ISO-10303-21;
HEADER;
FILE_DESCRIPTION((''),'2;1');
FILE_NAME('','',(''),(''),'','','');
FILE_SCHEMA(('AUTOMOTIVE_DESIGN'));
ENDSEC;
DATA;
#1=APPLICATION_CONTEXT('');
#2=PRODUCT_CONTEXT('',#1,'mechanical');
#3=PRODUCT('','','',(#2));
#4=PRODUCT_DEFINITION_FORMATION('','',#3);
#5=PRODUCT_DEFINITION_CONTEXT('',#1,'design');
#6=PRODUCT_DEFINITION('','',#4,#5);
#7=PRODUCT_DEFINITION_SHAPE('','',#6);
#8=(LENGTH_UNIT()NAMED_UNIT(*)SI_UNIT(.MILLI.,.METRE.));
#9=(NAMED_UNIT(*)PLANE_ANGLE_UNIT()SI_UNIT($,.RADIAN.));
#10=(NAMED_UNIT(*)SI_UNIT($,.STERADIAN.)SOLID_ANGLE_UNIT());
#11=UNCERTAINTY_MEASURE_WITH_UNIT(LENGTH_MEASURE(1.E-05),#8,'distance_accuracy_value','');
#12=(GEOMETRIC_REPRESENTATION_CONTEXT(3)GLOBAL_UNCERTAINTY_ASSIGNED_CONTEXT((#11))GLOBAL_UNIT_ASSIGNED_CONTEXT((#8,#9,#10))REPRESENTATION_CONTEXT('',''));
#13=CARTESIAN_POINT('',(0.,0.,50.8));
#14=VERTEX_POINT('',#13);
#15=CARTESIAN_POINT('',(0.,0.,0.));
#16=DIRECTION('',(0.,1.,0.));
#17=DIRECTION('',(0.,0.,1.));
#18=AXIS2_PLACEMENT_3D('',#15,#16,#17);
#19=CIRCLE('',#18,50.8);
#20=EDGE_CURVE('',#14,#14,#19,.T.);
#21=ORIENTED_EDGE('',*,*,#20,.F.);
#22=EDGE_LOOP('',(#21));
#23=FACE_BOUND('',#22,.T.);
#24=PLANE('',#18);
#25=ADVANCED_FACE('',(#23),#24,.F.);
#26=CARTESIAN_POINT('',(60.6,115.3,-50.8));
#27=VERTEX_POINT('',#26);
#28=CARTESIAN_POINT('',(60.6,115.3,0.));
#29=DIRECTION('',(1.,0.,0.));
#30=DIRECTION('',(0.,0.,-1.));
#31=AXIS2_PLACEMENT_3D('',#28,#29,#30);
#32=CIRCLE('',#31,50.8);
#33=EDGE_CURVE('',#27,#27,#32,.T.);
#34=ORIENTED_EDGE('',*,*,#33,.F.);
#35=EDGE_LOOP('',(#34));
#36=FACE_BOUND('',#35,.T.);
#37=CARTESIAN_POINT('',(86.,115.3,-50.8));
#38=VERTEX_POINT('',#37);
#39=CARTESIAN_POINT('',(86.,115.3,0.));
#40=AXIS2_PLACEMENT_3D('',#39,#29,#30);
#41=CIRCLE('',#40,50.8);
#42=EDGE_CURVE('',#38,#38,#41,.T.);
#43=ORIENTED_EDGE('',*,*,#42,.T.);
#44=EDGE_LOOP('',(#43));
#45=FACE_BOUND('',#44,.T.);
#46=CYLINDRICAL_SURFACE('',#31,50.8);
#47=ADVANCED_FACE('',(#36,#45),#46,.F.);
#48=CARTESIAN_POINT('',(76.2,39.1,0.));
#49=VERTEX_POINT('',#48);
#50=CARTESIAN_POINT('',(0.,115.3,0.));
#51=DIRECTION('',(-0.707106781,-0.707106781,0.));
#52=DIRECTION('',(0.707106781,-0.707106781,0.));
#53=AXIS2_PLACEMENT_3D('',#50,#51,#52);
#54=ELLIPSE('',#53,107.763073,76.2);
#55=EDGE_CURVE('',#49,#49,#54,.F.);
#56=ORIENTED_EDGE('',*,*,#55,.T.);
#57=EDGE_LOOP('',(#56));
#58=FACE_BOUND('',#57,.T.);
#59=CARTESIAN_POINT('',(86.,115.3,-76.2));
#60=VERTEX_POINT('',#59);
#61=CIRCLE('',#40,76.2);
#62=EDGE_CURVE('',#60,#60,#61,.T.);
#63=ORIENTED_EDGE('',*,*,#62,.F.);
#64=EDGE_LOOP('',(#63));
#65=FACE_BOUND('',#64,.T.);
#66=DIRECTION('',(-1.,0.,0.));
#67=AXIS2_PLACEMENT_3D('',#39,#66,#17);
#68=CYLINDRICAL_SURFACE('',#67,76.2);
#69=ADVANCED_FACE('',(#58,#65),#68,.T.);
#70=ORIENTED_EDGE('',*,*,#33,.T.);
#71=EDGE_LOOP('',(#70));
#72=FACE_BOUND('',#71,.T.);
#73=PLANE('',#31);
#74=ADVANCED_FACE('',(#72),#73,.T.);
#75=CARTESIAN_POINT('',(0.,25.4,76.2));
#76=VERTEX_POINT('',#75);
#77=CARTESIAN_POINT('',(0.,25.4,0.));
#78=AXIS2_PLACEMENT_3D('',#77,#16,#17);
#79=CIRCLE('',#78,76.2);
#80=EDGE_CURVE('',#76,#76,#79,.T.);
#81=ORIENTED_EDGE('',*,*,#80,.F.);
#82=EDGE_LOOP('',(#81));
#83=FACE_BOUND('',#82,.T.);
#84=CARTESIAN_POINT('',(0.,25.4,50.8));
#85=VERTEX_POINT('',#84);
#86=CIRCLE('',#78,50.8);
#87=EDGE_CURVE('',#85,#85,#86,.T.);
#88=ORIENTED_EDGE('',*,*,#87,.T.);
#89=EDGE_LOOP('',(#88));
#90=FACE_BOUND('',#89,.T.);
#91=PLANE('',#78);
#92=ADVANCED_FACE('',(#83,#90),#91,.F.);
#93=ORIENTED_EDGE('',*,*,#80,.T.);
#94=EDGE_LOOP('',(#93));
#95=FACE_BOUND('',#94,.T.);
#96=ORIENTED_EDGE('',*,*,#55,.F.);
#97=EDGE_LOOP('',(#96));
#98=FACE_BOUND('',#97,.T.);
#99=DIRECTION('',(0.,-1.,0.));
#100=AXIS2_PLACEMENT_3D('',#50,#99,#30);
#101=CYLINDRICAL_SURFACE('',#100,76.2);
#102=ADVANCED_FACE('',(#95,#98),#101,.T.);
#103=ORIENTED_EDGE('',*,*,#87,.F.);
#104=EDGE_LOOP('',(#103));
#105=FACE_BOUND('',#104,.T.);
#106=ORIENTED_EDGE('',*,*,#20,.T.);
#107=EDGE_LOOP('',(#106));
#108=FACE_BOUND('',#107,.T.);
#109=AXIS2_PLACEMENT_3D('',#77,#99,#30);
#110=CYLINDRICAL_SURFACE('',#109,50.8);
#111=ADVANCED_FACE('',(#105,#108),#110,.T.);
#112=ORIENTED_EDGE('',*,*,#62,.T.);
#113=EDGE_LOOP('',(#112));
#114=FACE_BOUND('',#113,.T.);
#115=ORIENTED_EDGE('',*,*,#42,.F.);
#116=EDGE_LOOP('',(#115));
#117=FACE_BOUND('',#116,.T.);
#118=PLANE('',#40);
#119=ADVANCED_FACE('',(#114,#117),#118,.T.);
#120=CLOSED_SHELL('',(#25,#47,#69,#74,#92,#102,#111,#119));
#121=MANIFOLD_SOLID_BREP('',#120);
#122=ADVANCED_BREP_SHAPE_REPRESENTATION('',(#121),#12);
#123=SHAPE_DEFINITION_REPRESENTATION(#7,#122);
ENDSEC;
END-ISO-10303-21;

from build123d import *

# Parameters (mm, degrees)
SKETCH1_R           = 50.8
BOSS_EXTRUDE1_DEPTH = 25.4
SKETCH2_R           = 76.2
BOSS_EXTRUDE2_DEPTH = 89.9
SKETCH4_R           = 76.2
BOSS_EXTRUDE3_DEPTH = 86
CUT_EXTRUDE1_DEPTH  = 202.96942838
SKETCH7_R           = 50.8
CUT_EXTRUDE2_DEPTH  = 25.4


with BuildPart() as part:
    # Sketch1 → Boss-Extrude1 (new body)
    with BuildSketch(Plane(origin=(0, 0, 0), x_dir=(1, 0, 0), z_dir=(0, 1, 0))):
        Circle(SKETCH1_R)
    extrude(amount=BOSS_EXTRUDE1_DEPTH)

    # Sketch2 → Boss-Extrude2 (add)
    with BuildSketch(Plane(origin=(0, 25.4, 0), x_dir=(1, 0, 0), z_dir=(0, 1, 0))):
        Circle(SKETCH2_R)
    extrude(amount=BOSS_EXTRUDE2_DEPTH)

    # Sketch4 → Boss-Extrude3 (add, symmetric)
    with BuildSketch(Plane(origin=(0, 0, 0), x_dir=(0, 0, -1), z_dir=(1, 0, 0))):
        with Locations((0, 115.3)):
            Circle(SKETCH4_R)
    extrude(amount=BOSS_EXTRUDE3_DEPTH, both=True)

    # Sketch5 → Cut-Extrude1 (cut, through all)
    with BuildSketch(Plane.XZ.offset(-25.4)):
        with BuildLine():
            Line((0, 76.2), (0, 148.473309088))
            ThreePointArc((0, 148.473309088), (-148.473309088, 0), (0, -148.473309088))
            Line((0, -148.473309088), (0, -76.2))
            ThreePointArc((0, -76.2), (-76.2, 0), (0, 76.2))
        make_face()
    extrude(amount=-CUT_EXTRUDE1_DEPTH, mode=Mode.SUBTRACT)

    # Sketch7 → Cut-Extrude2 (cut)
    with BuildSketch(Plane(origin=(86, 0, 0), x_dir=(0, 0, -1), z_dir=(1, 0, 0))):
        with Locations((0, 115.3)):
            Circle(SKETCH7_R)
    extrude(amount=-CUT_EXTRUDE2_DEPTH, mode=Mode.SUBTRACT)


solid = part.part
